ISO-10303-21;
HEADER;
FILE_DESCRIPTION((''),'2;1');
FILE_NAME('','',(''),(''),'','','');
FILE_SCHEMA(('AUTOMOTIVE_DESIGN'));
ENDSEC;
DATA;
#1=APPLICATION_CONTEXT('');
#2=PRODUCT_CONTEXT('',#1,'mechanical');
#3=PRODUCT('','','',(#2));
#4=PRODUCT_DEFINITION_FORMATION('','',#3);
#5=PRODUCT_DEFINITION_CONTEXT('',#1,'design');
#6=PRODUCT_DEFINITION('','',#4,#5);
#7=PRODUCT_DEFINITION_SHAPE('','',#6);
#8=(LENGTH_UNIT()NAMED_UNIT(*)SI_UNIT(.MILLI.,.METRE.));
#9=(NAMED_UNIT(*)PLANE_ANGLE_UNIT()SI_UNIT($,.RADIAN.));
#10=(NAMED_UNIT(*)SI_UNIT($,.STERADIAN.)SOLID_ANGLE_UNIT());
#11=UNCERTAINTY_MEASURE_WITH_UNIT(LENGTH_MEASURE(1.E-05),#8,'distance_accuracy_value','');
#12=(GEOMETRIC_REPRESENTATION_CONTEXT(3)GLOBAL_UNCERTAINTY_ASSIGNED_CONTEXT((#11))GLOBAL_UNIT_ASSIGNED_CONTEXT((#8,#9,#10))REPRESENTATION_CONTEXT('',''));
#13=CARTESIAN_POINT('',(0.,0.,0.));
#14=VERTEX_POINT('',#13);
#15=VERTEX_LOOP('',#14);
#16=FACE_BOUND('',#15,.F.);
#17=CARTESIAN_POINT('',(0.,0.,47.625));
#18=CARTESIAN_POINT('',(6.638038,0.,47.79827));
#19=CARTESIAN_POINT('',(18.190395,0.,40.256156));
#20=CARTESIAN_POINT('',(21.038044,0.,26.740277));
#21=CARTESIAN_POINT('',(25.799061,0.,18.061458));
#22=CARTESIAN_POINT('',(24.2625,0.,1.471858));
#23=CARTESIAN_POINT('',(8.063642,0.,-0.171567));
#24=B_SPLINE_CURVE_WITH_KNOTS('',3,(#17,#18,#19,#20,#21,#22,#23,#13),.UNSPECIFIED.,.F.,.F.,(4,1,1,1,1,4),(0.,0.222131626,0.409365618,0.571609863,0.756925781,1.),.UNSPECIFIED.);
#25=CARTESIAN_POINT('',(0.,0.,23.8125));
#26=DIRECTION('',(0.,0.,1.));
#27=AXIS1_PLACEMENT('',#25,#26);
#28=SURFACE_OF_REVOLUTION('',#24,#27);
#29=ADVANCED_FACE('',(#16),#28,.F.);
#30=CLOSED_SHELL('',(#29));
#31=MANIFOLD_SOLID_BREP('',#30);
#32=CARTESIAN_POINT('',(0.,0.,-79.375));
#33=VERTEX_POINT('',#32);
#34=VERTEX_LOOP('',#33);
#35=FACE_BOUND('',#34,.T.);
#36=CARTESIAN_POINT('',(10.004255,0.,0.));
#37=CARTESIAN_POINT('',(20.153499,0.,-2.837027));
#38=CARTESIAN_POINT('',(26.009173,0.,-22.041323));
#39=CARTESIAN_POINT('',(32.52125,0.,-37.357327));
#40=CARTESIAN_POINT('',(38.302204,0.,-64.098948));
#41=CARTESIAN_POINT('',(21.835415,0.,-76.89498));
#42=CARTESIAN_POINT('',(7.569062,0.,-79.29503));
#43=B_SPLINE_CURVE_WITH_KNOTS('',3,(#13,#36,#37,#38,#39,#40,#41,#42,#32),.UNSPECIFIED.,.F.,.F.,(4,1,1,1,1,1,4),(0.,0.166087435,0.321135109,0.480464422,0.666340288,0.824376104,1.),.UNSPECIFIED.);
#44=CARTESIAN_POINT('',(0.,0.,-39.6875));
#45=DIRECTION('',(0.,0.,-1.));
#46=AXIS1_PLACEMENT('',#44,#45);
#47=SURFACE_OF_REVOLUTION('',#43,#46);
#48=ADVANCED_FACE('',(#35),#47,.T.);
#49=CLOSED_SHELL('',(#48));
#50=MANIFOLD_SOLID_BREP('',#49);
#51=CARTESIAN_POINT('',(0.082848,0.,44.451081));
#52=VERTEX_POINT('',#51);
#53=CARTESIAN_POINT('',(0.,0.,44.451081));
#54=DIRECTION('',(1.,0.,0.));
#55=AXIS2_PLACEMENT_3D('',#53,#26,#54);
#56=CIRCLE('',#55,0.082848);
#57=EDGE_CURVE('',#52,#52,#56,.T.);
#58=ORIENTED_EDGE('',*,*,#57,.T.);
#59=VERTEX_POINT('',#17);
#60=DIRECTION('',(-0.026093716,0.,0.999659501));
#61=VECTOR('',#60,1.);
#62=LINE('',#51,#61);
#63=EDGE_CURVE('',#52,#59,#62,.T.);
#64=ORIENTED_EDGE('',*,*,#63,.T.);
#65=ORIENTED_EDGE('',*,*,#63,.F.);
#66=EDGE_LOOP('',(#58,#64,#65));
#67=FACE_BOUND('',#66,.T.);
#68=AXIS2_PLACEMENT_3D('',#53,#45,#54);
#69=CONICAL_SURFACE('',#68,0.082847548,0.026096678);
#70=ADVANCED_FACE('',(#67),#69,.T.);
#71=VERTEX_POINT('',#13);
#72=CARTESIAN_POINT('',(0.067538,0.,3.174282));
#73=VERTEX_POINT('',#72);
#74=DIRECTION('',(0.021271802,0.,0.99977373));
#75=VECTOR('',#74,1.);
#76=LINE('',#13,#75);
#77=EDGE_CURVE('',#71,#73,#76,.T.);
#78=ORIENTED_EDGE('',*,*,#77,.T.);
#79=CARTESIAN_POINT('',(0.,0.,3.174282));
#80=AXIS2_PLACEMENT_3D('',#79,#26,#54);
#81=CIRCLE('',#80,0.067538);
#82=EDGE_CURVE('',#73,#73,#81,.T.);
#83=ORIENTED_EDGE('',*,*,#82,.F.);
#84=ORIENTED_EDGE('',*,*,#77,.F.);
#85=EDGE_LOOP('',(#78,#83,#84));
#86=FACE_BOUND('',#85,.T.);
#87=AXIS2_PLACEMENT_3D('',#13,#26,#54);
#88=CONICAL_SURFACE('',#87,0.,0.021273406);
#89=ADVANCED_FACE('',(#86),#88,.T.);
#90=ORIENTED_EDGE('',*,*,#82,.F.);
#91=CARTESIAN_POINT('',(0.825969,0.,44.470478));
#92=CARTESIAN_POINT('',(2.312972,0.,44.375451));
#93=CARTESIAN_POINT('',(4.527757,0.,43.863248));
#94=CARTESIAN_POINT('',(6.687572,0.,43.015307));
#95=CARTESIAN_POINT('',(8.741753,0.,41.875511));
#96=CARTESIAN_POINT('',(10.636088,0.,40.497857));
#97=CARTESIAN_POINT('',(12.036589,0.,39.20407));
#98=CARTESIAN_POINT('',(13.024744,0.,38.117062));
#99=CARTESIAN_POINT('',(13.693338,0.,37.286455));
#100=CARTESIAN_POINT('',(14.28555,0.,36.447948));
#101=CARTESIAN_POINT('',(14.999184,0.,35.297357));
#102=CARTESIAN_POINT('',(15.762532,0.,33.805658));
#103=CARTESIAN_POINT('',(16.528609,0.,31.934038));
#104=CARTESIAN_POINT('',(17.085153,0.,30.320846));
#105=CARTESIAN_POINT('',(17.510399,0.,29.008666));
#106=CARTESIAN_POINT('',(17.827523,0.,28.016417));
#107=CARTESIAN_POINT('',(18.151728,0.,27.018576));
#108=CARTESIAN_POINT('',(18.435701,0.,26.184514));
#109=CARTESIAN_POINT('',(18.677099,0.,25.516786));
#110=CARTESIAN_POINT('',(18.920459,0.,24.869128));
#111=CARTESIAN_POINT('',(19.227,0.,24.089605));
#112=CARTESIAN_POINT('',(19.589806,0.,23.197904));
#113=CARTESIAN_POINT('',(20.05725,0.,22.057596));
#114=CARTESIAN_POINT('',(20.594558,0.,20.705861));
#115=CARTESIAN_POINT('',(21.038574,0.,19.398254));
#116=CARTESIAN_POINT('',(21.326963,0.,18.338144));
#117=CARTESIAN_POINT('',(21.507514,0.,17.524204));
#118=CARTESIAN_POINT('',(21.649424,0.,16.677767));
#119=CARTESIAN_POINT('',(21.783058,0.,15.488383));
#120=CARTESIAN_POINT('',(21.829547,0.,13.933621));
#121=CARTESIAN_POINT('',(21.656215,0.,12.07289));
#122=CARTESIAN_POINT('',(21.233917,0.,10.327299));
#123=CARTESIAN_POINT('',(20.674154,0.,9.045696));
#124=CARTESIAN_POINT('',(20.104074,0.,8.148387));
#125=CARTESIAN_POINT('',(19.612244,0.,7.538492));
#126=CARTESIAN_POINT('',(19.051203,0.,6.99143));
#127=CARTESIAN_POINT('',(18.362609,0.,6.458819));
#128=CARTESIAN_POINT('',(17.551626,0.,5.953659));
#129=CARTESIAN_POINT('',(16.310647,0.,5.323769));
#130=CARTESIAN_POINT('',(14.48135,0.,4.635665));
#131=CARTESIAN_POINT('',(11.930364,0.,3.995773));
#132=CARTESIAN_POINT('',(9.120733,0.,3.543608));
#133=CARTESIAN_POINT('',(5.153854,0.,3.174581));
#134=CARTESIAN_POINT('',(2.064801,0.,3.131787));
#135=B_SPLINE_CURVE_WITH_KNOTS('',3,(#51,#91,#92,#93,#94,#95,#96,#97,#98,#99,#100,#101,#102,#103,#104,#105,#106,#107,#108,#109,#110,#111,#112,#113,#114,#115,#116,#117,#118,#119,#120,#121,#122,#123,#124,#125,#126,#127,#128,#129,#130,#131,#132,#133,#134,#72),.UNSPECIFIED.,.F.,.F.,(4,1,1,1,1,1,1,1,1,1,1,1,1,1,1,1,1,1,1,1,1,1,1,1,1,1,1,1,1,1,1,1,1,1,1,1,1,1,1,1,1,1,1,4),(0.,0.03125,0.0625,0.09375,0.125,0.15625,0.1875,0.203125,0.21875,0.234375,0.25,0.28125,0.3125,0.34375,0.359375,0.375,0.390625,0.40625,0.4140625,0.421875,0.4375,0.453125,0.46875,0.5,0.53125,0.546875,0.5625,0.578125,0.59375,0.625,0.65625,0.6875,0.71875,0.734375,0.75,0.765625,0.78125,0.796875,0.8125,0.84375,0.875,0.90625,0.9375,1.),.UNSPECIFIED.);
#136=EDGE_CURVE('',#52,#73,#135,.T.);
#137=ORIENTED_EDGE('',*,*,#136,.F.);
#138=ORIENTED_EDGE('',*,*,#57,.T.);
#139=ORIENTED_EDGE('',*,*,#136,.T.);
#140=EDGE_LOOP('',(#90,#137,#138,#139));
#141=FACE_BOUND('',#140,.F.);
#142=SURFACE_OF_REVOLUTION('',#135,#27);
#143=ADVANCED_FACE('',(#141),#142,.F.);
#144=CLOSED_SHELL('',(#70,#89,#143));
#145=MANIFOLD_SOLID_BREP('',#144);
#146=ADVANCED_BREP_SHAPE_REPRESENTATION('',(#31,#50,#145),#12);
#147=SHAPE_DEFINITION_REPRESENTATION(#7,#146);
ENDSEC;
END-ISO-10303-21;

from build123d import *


# Not quite as in the source:
# - the dataset's text gives a spline's control points without its knots; the knots are read off the source's solid


with BuildPart() as f1:
    # F0 (on Front) → F1 (revolve)
    with BuildSketch(Plane.XZ):
        with BuildLine():
            Line((0.0828475478, 44.4510810842), (0, 47.625))
            Line((0, 47.625), (0, 0))
            Line((0, 0), (0.067537971, 3.1742815916))
            add(Edge.make_bspline(
                [(0.0828475478, 44.4510810842), (0.8259691177, 44.4704784921), (2.3129719527, 44.3754506266), (4.5277570417, 43.8632481161), (6.6875715628, 43.0153072301), (8.7417534692, 41.875510647), (10.6360876506, 40.4978573121), (12.0365888647, 39.2040697364), (13.0247440125, 38.1170616404), (13.6933377104, 37.2864551423), (14.2855495847, 36.4479482254), (14.9991836331, 35.2973566333), (15.7625324689, 33.805658), (16.5286089574, 31.9340383653), (17.0851525367, 30.3208456271), (17.5103993999, 29.0086661358), (17.8275229369, 28.0164165272), (18.1517283651, 27.0185764464), (18.4357007762, 26.1845144734), (18.6770989008, 25.516785706), (18.920459393, 24.8691283998), (19.22699954, 24.0896051963), (19.5898056302, 23.1979038166), (20.0572495505, 22.0575962077), (20.5945576958, 20.7058613351), (21.0385740922, 19.3982538763), (21.3269626385, 18.3381438994), (21.5075140524, 17.5242044354), (21.649423537, 16.6777672724), (21.7830575707, 15.4883830376), (21.8295470788, 13.9336212512), (21.6562151902, 12.0728895207), (21.2339168568, 10.3272991944), (20.6741544895, 9.0456955466), (20.1040740351, 8.1483871852), (19.6122439282, 7.5384923869), (19.0512031478, 6.9914303739), (18.362608675, 6.4588187943), (17.5516257551, 5.9536590548), (16.3106473808, 5.323769109), (14.4813496821, 4.6356651635), (11.9303638465, 3.995773159), (9.1207329887, 3.5436082772), (5.1538538848, 3.1745807045), (2.0648013383, 3.1317865856), (0.067537971, 3.1742815916)],
                knots=[0, 0, 0, 0, 0.03125, 0.0625, 0.09375, 0.125, 0.15625, 0.1874999999, 0.2031249999, 0.2187499999, 0.2343749999, 0.2499999999, 0.2812499999, 0.3124999999, 0.3437499999, 0.3593749999, 0.3749999999, 0.3906249999, 0.4062499999, 0.4140624999, 0.4218749999, 0.4374999999, 0.4531249999, 0.4687499999, 0.4999999998, 0.5312499998, 0.5468749998, 0.5624999998, 0.5781249998, 0.5937499998, 0.6249999998, 0.6562499998, 0.6874999998, 0.7187499998, 0.7343749998, 0.7499999998, 0.7656249998, 0.7812499998, 0.7968749998, 0.8124999998, 0.8437499997, 0.8749999997, 0.9062499997, 0.9374999997, 0.9999999997, 0.9999999997, 0.9999999997, 0.9999999997], degree=3))
        make_face()
        with BuildLine():
            add(Edge.make_bspline(
                [(0, 47.625), (6.6380382755, 47.7982700828), (18.1903953943, 40.2561558597), (21.0380439036, 26.7402773346), (25.7990612414, 18.0614575427), (24.2624997876, 1.4718581405), (8.0636420709, -0.1715670171), (0, 0)],
                knots=[0, 0, 0, 0, 0.2221316261, 0.4093656183, 0.5716098626, 0.7569257807, 1, 1, 1, 1], degree=3))
            Line((0, 47.625), (0.0828475478, 44.4510810842))
            add(Edge.make_bspline(
                [(0.0828475478, 44.4510810842), (0.8259691177, 44.4704784921), (2.3129719527, 44.3754506266), (4.5277570417, 43.8632481161), (6.6875715628, 43.0153072301), (8.7417534692, 41.875510647), (10.6360876506, 40.4978573121), (12.0365888647, 39.2040697364), (13.0247440125, 38.1170616404), (13.6933377104, 37.2864551423), (14.2855495847, 36.4479482254), (14.9991836331, 35.2973566333), (15.7625324689, 33.805658), (16.5286089574, 31.9340383653), (17.0851525367, 30.3208456271), (17.5103993999, 29.0086661358), (17.8275229369, 28.0164165272), (18.1517283651, 27.0185764464), (18.4357007762, 26.1845144734), (18.6770989008, 25.516785706), (18.920459393, 24.8691283998), (19.22699954, 24.0896051963), (19.5898056302, 23.1979038166), (20.0572495505, 22.0575962077), (20.5945576958, 20.7058613351), (21.0385740922, 19.3982538763), (21.3269626385, 18.3381438994), (21.5075140524, 17.5242044354), (21.649423537, 16.6777672724), (21.7830575707, 15.4883830376), (21.8295470788, 13.9336212512), (21.6562151902, 12.0728895207), (21.2339168568, 10.3272991944), (20.6741544895, 9.0456955466), (20.1040740351, 8.1483871852), (19.6122439282, 7.5384923869), (19.0512031478, 6.9914303739), (18.362608675, 6.4588187943), (17.5516257551, 5.9536590548), (16.3106473808, 5.323769109), (14.4813496821, 4.6356651635), (11.9303638465, 3.995773159), (9.1207329887, 3.5436082772), (5.1538538848, 3.1745807045), (2.0648013383, 3.1317865856), (0.067537971, 3.1742815916)],
                knots=[0, 0, 0, 0, 0.03125, 0.0625, 0.09375, 0.125, 0.15625, 0.1874999999, 0.2031249999, 0.2187499999, 0.2343749999, 0.2499999999, 0.2812499999, 0.3124999999, 0.3437499999, 0.3593749999, 0.3749999999, 0.3906249999, 0.4062499999, 0.4140624999, 0.4218749999, 0.4374999999, 0.4531249999, 0.4687499999, 0.4999999998, 0.5312499998, 0.5468749998, 0.5624999998, 0.5781249998, 0.5937499998, 0.6249999998, 0.6562499998, 0.6874999998, 0.7187499998, 0.7343749998, 0.7499999998, 0.7656249998, 0.7812499998, 0.7968749998, 0.8124999998, 0.8437499997, 0.8749999997, 0.9062499997, 0.9374999997, 0.9999999997, 0.9999999997, 0.9999999997, 0.9999999997], degree=3))
            Line((0.067537971, 3.1742815916), (0, 0))
        make_face()
    revolve(axis=Axis((0, 0, 23.8125), (0, 0, 1)))


with BuildPart() as f2:
    # F0 (on Front) → F2 (revolve)
    with BuildSketch(Plane.XZ):
        with BuildLine():
            Line((0.0828475478, 44.4510810842), (0, 47.625))
            Line((0, 47.625), (0, 0))
            Line((0, 0), (0.067537971, 3.1742815916))
            add(Edge.make_bspline(
                [(0.0828475478, 44.4510810842), (0.8259691177, 44.4704784921), (2.3129719527, 44.3754506266), (4.5277570417, 43.8632481161), (6.6875715628, 43.0153072301), (8.7417534692, 41.875510647), (10.6360876506, 40.4978573121), (12.0365888647, 39.2040697364), (13.0247440125, 38.1170616404), (13.6933377104, 37.2864551423), (14.2855495847, 36.4479482254), (14.9991836331, 35.2973566333), (15.7625324689, 33.805658), (16.5286089574, 31.9340383653), (17.0851525367, 30.3208456271), (17.5103993999, 29.0086661358), (17.8275229369, 28.0164165272), (18.1517283651, 27.0185764464), (18.4357007762, 26.1845144734), (18.6770989008, 25.516785706), (18.920459393, 24.8691283998), (19.22699954, 24.0896051963), (19.5898056302, 23.1979038166), (20.0572495505, 22.0575962077), (20.5945576958, 20.7058613351), (21.0385740922, 19.3982538763), (21.3269626385, 18.3381438994), (21.5075140524, 17.5242044354), (21.649423537, 16.6777672724), (21.7830575707, 15.4883830376), (21.8295470788, 13.9336212512), (21.6562151902, 12.0728895207), (21.2339168568, 10.3272991944), (20.6741544895, 9.0456955466), (20.1040740351, 8.1483871852), (19.6122439282, 7.5384923869), (19.0512031478, 6.9914303739), (18.362608675, 6.4588187943), (17.5516257551, 5.9536590548), (16.3106473808, 5.323769109), (14.4813496821, 4.6356651635), (11.9303638465, 3.995773159), (9.1207329887, 3.5436082772), (5.1538538848, 3.1745807045), (2.0648013383, 3.1317865856), (0.067537971, 3.1742815916)],
                knots=[0, 0, 0, 0, 0.03125, 0.0625, 0.09375, 0.125, 0.15625, 0.1874999999, 0.2031249999, 0.2187499999, 0.2343749999, 0.2499999999, 0.2812499999, 0.3124999999, 0.3437499999, 0.3593749999, 0.3749999999, 0.3906249999, 0.4062499999, 0.4140624999, 0.4218749999, 0.4374999999, 0.4531249999, 0.4687499999, 0.4999999998, 0.5312499998, 0.5468749998, 0.5624999998, 0.5781249998, 0.5937499998, 0.6249999998, 0.6562499998, 0.6874999998, 0.7187499998, 0.7343749998, 0.7499999998, 0.7656249998, 0.7812499998, 0.7968749998, 0.8124999998, 0.8437499997, 0.8749999997, 0.9062499997, 0.9374999997, 0.9999999997, 0.9999999997, 0.9999999997, 0.9999999997], degree=3))
        make_face()
    revolve(axis=Axis((0, 0, 23.8125), (0, 0, 1)))


with BuildPart() as f4:
    # F3 (on Front) → F4 (revolve)
    with BuildSketch(Plane.XZ):
        with BuildLine():
            add(Edge.make_bspline(
                [(0, 0), (10.0042552454, 0), (20.1534990403, -2.8370273331), (26.0091728923, -22.0413226573), (32.5212498809, -37.3573271092), (38.3022039612, -64.0989478859), (21.8354153186, -76.8949800842), (7.5690615594, -79.2950304351), (0, -79.375)],
                knots=[0, 0, 0, 0, 0.1660874353, 0.3211351087, 0.4804644216, 0.6663402882, 0.8243761042, 1, 1, 1, 1], degree=3))
            Line((0, 0), (0, -79.375))
        make_face()
    revolve(axis=Axis((0, 0, -39.6875), (0, 0, -1)))


solid = Compound([f1.part, f2.part, f4.part])
